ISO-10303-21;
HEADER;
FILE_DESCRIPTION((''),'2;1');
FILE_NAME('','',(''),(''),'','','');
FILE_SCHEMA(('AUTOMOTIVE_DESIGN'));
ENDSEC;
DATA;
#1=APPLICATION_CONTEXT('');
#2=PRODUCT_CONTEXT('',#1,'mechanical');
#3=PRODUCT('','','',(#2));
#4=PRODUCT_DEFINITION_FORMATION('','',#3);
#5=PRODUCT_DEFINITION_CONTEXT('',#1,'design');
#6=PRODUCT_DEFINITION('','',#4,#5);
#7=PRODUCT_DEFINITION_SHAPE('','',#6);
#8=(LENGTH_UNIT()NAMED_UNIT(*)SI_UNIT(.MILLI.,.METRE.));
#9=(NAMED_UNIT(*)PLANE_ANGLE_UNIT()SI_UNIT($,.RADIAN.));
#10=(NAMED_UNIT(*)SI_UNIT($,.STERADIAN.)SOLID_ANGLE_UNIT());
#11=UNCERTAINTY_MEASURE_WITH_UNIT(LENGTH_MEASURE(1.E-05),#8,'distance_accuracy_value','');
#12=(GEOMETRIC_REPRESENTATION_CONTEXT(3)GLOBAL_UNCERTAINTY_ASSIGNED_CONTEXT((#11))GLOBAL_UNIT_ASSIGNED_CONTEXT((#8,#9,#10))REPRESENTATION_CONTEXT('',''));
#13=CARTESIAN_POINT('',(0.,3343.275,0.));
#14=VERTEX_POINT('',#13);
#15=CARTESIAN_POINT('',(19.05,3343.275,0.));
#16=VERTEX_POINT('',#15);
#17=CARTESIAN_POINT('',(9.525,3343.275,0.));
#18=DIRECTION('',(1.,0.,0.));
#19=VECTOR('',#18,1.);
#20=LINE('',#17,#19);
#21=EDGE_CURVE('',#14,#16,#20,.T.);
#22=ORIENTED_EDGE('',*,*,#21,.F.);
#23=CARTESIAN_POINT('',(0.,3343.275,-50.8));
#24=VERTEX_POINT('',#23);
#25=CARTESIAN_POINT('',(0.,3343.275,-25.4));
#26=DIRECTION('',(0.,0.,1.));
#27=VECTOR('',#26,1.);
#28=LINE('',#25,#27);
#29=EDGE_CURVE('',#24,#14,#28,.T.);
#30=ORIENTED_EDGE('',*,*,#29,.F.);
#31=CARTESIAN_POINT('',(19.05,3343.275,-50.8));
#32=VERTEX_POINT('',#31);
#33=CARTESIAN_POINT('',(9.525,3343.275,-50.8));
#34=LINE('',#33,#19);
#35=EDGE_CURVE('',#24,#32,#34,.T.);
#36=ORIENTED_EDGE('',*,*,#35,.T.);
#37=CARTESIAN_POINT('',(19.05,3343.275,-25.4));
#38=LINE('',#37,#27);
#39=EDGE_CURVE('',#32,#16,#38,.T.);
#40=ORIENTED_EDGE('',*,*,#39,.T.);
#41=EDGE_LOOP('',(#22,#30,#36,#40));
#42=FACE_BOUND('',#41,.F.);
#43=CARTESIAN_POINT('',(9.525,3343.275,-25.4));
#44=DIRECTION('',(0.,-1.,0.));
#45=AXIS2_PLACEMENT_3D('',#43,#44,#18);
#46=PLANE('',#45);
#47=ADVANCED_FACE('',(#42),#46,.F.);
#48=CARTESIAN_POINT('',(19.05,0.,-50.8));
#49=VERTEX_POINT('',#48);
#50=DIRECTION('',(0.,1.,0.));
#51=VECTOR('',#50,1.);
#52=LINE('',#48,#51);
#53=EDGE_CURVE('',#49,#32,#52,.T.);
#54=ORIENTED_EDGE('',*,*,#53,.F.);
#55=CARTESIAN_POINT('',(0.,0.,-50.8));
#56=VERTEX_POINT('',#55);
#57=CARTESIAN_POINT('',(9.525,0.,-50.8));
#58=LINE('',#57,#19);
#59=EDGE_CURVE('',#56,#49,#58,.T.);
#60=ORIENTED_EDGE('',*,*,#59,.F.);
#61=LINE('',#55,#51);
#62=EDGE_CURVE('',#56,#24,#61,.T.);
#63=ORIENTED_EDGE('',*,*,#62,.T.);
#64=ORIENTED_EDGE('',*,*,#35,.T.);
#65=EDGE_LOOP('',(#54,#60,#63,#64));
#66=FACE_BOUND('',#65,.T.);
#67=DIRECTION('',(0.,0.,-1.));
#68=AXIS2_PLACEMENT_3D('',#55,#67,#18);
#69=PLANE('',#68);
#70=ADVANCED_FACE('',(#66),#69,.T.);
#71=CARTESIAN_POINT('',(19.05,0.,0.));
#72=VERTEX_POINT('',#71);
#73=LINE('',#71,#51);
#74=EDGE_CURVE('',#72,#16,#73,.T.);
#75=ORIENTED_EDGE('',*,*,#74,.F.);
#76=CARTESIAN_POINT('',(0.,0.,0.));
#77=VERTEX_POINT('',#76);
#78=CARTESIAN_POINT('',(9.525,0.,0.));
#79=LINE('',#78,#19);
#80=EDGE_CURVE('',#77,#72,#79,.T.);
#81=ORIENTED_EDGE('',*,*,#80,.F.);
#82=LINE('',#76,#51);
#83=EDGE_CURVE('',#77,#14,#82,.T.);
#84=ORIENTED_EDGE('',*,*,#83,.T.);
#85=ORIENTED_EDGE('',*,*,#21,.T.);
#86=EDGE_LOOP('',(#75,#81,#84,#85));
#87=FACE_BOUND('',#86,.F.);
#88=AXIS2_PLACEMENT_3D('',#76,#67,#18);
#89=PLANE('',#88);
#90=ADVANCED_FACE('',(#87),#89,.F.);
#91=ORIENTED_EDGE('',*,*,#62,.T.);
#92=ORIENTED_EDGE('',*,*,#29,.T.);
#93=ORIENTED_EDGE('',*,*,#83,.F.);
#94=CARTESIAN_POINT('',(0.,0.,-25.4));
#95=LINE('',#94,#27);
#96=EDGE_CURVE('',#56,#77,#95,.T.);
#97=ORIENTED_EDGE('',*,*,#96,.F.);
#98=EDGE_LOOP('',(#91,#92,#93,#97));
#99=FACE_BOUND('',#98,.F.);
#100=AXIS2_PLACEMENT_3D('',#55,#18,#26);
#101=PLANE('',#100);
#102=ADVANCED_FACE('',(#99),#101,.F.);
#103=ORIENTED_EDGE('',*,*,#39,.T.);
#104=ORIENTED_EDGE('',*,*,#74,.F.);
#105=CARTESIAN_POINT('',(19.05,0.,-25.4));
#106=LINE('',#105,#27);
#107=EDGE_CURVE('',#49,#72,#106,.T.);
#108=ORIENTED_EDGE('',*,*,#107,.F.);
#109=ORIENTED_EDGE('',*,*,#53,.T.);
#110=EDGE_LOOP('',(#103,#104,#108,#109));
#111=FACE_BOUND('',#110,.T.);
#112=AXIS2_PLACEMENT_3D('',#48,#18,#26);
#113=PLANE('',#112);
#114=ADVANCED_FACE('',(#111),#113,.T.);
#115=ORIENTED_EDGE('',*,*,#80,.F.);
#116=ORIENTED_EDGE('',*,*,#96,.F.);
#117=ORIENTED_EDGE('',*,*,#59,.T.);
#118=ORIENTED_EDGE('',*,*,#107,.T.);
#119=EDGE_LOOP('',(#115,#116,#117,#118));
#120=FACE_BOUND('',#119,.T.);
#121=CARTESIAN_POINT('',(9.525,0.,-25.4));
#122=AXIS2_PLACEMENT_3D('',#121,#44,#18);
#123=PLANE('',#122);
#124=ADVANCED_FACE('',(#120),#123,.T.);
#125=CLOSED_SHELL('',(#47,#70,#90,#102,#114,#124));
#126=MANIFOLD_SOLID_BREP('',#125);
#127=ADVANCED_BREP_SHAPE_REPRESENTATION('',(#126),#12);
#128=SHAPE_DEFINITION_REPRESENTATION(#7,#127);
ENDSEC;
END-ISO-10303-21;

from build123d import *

# Parameters (mm, degrees)
F0_W     = 19.05
F0_H     = 50.8
F1_DEPTH = 3343.275


# Not quite as in the source:
# - a length typed as a fraction of an inch, garbled in the dataset ("3 / 203.2 mm" for 3/8 in), is restored


with BuildPart() as f1:
    # F0 (on Front) → F1 (new body)
    with BuildSketch(Plane.XZ):
        with Locations((9.525, -25.4)):
            Rectangle(F0_W, F0_H)
    extrude(amount=-F1_DEPTH)


solid = f1.part
